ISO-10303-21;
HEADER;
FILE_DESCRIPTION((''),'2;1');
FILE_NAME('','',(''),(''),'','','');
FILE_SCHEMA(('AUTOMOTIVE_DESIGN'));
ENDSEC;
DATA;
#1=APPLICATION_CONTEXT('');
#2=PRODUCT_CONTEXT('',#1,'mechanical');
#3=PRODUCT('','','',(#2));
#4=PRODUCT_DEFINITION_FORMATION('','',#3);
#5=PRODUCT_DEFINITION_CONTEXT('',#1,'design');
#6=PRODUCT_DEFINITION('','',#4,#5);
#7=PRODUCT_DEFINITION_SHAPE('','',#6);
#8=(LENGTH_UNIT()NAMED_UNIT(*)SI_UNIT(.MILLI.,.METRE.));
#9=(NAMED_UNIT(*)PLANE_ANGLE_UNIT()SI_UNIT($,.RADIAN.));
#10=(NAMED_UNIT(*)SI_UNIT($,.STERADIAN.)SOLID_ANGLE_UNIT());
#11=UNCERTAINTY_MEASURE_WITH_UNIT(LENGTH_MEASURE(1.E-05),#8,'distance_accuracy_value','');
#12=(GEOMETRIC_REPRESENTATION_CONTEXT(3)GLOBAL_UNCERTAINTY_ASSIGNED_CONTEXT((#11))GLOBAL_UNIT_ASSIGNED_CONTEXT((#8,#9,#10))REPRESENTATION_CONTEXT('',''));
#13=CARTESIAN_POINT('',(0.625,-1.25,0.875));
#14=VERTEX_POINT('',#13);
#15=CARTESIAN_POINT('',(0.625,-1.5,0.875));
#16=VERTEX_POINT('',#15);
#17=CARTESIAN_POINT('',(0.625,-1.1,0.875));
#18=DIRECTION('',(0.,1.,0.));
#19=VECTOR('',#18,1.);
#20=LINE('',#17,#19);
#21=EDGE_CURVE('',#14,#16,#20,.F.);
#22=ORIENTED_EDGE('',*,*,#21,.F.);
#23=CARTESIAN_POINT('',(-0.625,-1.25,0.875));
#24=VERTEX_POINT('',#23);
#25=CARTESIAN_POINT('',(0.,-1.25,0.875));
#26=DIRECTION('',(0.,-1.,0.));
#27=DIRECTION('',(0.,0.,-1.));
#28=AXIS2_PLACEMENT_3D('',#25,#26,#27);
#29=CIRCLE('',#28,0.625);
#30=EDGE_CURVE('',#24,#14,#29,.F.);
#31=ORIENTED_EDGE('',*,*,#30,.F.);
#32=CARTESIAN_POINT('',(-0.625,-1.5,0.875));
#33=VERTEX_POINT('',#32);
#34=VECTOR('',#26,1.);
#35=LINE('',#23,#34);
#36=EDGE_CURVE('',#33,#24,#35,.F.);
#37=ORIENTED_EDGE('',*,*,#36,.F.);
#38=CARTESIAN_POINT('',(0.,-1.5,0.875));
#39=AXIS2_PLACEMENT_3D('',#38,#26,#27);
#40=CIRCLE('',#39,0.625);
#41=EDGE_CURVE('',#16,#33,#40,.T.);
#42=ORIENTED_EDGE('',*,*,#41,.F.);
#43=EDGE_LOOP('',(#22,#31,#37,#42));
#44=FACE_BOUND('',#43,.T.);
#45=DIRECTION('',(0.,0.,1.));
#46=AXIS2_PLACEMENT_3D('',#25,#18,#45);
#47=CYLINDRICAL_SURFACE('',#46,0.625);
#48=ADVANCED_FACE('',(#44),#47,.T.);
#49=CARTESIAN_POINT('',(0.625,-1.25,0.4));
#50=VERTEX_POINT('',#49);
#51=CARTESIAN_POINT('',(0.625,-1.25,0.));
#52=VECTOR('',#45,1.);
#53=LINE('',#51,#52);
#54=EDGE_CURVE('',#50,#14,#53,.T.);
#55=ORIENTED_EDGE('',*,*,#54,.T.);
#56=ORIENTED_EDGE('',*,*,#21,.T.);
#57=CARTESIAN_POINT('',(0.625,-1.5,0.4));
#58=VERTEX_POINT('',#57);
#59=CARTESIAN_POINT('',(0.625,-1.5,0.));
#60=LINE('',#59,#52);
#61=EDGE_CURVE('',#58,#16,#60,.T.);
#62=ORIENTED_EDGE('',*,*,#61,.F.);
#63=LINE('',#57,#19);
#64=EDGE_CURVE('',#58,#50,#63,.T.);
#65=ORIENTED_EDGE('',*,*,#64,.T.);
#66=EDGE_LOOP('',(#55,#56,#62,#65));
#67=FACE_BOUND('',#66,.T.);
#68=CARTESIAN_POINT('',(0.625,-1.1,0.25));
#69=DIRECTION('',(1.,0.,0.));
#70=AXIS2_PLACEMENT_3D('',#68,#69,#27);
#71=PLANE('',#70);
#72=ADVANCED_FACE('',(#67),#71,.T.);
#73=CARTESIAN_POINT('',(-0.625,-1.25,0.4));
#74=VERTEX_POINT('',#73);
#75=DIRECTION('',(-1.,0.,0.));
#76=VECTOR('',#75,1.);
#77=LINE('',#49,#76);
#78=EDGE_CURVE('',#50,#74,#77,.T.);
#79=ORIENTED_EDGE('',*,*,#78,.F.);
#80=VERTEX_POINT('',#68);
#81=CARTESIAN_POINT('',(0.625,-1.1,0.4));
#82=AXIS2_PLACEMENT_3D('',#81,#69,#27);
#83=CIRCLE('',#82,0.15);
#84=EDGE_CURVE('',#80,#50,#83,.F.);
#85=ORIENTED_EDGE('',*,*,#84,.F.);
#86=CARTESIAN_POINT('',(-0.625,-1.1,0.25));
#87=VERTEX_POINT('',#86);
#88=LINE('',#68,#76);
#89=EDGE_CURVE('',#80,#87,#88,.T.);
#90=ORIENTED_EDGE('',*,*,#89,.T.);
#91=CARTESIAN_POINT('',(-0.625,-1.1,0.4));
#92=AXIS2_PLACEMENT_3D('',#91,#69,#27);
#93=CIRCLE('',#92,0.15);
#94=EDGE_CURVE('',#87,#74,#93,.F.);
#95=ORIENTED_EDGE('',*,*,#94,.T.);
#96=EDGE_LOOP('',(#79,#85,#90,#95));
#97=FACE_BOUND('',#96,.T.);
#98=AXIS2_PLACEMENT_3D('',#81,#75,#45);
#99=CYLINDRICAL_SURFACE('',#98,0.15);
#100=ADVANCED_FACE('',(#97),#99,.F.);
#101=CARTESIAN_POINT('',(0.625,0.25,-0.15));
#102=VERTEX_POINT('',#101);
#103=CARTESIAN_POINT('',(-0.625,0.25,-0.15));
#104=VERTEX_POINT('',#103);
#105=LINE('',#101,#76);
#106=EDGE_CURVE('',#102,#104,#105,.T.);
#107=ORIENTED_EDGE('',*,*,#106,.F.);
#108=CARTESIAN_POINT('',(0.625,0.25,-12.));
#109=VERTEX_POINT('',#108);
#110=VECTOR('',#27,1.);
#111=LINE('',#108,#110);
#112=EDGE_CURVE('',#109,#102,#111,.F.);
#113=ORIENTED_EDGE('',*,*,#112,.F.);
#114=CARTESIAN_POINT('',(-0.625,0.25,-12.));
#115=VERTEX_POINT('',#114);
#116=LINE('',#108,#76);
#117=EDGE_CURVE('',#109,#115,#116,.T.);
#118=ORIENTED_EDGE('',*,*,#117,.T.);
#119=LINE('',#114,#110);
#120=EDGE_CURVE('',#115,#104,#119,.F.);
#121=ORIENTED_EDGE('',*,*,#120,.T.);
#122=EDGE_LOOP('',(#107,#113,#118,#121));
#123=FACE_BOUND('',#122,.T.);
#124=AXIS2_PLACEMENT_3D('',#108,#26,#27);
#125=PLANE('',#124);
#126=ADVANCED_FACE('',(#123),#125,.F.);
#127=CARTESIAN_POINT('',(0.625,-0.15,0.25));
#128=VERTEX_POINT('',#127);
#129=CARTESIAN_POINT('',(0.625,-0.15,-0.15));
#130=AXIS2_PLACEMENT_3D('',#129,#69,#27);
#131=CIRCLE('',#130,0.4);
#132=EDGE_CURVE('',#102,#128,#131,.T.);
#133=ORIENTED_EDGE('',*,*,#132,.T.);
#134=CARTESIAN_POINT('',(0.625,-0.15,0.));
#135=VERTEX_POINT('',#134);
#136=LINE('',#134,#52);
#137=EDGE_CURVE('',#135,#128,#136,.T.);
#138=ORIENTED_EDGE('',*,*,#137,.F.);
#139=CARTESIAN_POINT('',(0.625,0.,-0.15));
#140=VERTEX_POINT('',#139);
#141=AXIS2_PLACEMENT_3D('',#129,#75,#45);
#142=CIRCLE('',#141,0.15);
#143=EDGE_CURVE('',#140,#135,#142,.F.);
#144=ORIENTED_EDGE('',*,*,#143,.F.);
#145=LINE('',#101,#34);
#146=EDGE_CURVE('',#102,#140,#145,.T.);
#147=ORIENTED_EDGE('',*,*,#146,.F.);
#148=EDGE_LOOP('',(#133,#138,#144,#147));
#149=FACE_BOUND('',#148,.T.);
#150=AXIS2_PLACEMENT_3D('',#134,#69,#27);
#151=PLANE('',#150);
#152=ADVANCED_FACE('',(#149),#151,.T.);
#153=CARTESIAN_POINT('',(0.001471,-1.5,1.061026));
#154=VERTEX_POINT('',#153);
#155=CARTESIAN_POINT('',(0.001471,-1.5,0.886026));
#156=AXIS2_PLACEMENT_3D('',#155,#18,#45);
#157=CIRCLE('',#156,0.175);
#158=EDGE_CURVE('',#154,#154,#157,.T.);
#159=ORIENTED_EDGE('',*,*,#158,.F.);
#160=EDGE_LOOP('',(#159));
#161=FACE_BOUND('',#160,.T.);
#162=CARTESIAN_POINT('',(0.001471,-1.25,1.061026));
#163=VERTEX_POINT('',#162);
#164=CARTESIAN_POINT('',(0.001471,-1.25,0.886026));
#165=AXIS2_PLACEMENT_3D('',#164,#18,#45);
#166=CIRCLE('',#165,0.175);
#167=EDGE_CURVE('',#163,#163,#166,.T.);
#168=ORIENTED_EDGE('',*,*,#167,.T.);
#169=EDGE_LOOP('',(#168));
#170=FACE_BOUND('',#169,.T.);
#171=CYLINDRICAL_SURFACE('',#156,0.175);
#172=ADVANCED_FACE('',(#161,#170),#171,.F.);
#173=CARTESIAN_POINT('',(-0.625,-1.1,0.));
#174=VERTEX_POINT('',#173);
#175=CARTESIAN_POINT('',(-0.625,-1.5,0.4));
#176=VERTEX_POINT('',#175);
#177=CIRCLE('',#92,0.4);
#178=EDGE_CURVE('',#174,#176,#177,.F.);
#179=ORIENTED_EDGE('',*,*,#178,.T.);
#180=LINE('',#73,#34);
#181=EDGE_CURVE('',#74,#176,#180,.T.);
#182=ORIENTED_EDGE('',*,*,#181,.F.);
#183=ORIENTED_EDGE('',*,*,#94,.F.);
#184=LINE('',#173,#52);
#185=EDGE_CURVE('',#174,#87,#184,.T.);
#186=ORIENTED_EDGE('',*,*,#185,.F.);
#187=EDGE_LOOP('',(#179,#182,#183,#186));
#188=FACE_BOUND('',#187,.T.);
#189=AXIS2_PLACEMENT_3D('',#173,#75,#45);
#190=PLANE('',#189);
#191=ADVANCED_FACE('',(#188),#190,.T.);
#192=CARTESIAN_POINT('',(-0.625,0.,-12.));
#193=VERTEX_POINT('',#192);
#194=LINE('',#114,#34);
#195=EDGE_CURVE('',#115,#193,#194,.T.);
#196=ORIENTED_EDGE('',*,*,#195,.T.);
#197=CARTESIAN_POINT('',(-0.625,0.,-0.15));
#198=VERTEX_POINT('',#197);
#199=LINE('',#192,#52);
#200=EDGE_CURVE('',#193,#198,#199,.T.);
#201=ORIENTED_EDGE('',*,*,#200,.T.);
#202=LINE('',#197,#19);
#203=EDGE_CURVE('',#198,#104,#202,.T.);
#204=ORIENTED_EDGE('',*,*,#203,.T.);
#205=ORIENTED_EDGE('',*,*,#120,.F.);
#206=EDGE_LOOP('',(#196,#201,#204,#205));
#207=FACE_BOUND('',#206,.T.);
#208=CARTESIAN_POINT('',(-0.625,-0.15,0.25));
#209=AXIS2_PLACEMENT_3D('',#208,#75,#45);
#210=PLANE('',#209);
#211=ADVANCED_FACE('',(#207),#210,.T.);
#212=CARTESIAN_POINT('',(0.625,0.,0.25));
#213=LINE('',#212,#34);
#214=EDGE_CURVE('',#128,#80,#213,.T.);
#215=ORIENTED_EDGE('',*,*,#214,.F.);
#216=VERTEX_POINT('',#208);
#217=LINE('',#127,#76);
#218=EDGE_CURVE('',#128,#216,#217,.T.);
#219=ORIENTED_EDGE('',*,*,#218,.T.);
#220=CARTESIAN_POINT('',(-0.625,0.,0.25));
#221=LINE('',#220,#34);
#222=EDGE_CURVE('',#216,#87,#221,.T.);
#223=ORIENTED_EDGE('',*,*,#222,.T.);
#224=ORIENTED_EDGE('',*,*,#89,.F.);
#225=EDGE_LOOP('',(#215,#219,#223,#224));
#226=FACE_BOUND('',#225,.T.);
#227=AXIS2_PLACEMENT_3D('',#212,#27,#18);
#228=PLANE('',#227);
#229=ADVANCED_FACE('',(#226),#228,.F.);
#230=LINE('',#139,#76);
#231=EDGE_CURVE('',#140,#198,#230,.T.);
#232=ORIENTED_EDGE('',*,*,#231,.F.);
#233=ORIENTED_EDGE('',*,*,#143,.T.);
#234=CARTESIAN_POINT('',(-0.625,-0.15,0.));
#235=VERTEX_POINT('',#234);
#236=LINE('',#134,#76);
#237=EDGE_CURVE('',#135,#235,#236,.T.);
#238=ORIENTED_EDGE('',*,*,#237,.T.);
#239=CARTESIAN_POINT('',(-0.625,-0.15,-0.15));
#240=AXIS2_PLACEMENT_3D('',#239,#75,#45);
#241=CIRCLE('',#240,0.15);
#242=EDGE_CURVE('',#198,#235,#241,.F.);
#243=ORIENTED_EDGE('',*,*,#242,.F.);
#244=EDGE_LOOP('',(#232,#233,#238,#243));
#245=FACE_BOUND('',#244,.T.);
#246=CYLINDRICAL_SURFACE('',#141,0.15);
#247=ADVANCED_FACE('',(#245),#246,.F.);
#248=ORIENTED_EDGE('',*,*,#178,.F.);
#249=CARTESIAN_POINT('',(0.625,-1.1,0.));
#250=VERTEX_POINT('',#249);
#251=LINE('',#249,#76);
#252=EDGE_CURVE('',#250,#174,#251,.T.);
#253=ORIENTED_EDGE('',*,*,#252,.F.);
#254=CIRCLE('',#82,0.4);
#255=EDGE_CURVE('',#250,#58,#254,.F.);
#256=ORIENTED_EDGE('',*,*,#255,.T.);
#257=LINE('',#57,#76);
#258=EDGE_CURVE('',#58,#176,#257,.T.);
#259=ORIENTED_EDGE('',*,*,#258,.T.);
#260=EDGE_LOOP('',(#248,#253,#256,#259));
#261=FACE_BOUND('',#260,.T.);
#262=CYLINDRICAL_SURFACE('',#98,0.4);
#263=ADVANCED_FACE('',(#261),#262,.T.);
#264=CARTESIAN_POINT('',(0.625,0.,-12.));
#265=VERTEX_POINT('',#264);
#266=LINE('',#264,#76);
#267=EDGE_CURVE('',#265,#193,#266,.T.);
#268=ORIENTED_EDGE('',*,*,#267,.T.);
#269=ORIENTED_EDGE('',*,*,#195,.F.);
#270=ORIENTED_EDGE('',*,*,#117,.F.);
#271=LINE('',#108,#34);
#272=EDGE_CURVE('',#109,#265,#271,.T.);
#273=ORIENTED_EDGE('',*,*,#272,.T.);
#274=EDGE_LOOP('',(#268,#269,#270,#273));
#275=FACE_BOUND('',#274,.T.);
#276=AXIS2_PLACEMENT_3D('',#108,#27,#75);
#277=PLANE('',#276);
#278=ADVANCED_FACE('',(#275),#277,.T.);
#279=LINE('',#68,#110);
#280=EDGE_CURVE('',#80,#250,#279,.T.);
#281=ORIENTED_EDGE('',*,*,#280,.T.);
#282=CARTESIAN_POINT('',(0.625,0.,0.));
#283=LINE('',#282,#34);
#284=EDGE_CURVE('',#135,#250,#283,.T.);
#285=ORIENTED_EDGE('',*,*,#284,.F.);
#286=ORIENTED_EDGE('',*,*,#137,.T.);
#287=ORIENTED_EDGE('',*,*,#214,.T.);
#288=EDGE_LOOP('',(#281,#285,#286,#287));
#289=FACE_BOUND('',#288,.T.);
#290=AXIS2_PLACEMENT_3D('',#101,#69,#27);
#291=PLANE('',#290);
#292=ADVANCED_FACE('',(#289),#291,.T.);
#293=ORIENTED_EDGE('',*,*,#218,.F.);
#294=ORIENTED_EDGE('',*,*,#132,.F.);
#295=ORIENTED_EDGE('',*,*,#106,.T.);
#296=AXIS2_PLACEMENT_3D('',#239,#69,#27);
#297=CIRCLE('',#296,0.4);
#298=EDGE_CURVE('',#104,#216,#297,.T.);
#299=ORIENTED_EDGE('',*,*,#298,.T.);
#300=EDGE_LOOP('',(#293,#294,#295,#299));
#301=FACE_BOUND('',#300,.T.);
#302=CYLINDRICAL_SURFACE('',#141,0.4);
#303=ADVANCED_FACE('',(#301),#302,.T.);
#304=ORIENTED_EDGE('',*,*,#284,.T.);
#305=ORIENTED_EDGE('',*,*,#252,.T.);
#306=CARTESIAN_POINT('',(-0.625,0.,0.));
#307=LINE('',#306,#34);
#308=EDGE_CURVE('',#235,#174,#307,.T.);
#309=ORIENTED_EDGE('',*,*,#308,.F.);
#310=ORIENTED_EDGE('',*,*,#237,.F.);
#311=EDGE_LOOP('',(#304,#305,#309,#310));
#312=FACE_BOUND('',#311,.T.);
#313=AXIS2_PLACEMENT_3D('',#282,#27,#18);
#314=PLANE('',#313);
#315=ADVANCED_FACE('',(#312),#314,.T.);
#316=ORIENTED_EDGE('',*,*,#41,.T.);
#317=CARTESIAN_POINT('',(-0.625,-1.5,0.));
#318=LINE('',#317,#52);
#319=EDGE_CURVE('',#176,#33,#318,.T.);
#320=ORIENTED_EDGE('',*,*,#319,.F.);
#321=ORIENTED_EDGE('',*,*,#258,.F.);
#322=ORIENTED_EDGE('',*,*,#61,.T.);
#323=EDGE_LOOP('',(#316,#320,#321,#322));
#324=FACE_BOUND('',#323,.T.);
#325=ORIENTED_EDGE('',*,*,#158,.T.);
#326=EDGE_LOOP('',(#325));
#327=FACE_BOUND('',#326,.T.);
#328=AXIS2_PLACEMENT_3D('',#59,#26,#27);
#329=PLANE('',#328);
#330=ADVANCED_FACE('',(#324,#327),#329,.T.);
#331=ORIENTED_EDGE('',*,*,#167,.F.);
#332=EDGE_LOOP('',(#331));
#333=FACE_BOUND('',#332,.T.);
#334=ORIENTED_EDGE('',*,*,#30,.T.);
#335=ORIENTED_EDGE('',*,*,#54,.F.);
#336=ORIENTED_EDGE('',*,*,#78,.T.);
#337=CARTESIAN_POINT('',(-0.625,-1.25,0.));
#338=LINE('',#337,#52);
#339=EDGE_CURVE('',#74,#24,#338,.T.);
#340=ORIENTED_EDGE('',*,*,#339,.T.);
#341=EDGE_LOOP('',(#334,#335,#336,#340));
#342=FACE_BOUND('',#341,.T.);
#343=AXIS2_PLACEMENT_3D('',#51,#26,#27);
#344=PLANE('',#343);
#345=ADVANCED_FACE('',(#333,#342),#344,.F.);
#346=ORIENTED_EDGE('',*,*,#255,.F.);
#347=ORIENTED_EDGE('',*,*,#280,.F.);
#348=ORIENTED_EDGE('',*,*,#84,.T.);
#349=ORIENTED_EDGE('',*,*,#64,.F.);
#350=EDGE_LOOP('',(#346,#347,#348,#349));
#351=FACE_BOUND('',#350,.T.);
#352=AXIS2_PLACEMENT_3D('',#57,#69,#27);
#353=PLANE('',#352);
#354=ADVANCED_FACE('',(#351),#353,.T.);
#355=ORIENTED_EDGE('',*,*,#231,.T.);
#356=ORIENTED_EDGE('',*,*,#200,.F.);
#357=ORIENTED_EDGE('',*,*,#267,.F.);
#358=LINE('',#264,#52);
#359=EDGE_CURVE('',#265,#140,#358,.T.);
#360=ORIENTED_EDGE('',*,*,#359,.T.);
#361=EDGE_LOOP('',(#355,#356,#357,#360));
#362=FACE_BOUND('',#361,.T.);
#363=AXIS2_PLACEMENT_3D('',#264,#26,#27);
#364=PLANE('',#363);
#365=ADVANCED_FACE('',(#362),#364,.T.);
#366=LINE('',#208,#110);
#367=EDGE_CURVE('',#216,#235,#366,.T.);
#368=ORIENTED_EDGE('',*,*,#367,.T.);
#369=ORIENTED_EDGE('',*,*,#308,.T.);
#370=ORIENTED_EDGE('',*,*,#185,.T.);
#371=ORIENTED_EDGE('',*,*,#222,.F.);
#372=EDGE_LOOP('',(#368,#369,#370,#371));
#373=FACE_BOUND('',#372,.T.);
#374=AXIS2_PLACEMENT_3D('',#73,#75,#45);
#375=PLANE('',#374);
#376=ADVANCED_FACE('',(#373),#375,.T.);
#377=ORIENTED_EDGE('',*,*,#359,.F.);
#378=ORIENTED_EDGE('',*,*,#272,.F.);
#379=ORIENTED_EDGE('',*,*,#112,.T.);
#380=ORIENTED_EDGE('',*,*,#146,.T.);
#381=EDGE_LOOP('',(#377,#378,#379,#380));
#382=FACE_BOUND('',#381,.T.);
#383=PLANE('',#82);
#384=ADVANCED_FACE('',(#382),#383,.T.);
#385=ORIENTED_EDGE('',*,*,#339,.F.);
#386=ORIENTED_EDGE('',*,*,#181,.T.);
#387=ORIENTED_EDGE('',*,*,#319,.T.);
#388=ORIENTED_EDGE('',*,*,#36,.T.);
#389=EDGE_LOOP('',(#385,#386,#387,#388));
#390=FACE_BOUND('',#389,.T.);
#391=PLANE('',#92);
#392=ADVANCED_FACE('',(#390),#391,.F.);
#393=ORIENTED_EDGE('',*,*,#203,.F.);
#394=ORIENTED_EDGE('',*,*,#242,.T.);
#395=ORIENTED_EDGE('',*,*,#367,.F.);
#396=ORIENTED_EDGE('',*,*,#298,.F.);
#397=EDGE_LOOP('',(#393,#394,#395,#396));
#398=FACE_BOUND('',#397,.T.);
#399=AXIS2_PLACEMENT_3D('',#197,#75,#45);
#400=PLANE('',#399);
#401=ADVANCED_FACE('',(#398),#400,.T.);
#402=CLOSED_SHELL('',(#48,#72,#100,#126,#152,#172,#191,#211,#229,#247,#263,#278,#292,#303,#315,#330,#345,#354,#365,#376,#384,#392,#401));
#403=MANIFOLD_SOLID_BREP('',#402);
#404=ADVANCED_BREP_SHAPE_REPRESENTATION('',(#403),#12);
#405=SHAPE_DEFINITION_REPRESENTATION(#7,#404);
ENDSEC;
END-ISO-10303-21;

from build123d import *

# Parameters (mm, degrees)
BASE_FLANGE1_DEPTH = 0.625
FILLET1_RADIUS     = 0.625
FILLET1_LENGTH     = 0.25
HOLE1_START        = -1.5
HOLE1_OUTLINE_R    = 0.175
HOLE1_DEPTH        = 0.25


# Read off the part's stored shape, not the designer's step: Hole1
# Sheet-metal steps are written as plain solids
with BuildPart() as part:
    # Sketch1 → Base-Flange1 (new, symmetric)
    with BuildSketch(Plane(origin=(0, 0, 0), x_dir=(0, 0, -1), z_dir=(1, 0, 0))):
        with BuildLine():
            Line((12, 0), (0.15, 0))
            ThreePointArc((0.15, 0), (0.043933983, -0.043933983), (0, -0.15))
            Line((0, -0.15), (0, -1.1))
            ThreePointArc((0, -1.1), (-0.117157288, -1.382842712), (-0.4, -1.5))
            Line((-0.4, -1.5), (-1.5, -1.5))
            Line((-1.5, -1.5), (-1.5, -1.25))
            Line((-1.5, -1.25), (-0.4, -1.25))
            ThreePointArc((-0.4, -1.25), (-0.293933983, -1.206066017), (-0.25, -1.1))
            Line((-0.25, -1.1), (-0.25, -0.15))
            ThreePointArc((-0.25, -0.15), (-0.132842712, 0.132842712), (0.15, 0.25))
            Line((0.15, 0.25), (12, 0.25))
            Line((12, 0.25), (12, 0))
        make_face()
    extrude(amount=BASE_FLANGE1_DEPTH, both=True)

    # Fillet1: full round fillet: the end face becomes a half cylinder, R = half its width
    fillet1_face = Plane((0, -1.375, 1.5), x_dir=(0, -1, 0), z_dir=(0, 0, 1))  # on the end face: x along it, z out of the body
    fillet1_slab = fillet1_face.offset(-FILLET1_RADIUS / 2) * Box(FILLET1_LENGTH, 2 * FILLET1_RADIUS, FILLET1_RADIUS, mode=Mode.PRIVATE)  # the body's end, R deep
    fillet1_round = Plane((0, -1.375, 0.875), x_dir=(0, 0, 1), z_dir=(0, -1, 0)) * Cylinder(FILLET1_RADIUS, FILLET1_LENGTH, mode=Mode.PRIVATE)  # its axis R under the face
    add(fillet1_slab - fillet1_round, mode=Mode.SUBTRACT)

    # Hole1 outline → Hole1 (cut)
    with BuildSketch(Plane(origin=(0, 0, 0), x_dir=(1, 0, 0), z_dir=(0, 1, 0)).offset(HOLE1_START)):
        with Locations((0.001471382, -0.886025874)):
            Circle(HOLE1_OUTLINE_R)
    extrude(amount=HOLE1_DEPTH, mode=Mode.SUBTRACT)


solid = part.part
